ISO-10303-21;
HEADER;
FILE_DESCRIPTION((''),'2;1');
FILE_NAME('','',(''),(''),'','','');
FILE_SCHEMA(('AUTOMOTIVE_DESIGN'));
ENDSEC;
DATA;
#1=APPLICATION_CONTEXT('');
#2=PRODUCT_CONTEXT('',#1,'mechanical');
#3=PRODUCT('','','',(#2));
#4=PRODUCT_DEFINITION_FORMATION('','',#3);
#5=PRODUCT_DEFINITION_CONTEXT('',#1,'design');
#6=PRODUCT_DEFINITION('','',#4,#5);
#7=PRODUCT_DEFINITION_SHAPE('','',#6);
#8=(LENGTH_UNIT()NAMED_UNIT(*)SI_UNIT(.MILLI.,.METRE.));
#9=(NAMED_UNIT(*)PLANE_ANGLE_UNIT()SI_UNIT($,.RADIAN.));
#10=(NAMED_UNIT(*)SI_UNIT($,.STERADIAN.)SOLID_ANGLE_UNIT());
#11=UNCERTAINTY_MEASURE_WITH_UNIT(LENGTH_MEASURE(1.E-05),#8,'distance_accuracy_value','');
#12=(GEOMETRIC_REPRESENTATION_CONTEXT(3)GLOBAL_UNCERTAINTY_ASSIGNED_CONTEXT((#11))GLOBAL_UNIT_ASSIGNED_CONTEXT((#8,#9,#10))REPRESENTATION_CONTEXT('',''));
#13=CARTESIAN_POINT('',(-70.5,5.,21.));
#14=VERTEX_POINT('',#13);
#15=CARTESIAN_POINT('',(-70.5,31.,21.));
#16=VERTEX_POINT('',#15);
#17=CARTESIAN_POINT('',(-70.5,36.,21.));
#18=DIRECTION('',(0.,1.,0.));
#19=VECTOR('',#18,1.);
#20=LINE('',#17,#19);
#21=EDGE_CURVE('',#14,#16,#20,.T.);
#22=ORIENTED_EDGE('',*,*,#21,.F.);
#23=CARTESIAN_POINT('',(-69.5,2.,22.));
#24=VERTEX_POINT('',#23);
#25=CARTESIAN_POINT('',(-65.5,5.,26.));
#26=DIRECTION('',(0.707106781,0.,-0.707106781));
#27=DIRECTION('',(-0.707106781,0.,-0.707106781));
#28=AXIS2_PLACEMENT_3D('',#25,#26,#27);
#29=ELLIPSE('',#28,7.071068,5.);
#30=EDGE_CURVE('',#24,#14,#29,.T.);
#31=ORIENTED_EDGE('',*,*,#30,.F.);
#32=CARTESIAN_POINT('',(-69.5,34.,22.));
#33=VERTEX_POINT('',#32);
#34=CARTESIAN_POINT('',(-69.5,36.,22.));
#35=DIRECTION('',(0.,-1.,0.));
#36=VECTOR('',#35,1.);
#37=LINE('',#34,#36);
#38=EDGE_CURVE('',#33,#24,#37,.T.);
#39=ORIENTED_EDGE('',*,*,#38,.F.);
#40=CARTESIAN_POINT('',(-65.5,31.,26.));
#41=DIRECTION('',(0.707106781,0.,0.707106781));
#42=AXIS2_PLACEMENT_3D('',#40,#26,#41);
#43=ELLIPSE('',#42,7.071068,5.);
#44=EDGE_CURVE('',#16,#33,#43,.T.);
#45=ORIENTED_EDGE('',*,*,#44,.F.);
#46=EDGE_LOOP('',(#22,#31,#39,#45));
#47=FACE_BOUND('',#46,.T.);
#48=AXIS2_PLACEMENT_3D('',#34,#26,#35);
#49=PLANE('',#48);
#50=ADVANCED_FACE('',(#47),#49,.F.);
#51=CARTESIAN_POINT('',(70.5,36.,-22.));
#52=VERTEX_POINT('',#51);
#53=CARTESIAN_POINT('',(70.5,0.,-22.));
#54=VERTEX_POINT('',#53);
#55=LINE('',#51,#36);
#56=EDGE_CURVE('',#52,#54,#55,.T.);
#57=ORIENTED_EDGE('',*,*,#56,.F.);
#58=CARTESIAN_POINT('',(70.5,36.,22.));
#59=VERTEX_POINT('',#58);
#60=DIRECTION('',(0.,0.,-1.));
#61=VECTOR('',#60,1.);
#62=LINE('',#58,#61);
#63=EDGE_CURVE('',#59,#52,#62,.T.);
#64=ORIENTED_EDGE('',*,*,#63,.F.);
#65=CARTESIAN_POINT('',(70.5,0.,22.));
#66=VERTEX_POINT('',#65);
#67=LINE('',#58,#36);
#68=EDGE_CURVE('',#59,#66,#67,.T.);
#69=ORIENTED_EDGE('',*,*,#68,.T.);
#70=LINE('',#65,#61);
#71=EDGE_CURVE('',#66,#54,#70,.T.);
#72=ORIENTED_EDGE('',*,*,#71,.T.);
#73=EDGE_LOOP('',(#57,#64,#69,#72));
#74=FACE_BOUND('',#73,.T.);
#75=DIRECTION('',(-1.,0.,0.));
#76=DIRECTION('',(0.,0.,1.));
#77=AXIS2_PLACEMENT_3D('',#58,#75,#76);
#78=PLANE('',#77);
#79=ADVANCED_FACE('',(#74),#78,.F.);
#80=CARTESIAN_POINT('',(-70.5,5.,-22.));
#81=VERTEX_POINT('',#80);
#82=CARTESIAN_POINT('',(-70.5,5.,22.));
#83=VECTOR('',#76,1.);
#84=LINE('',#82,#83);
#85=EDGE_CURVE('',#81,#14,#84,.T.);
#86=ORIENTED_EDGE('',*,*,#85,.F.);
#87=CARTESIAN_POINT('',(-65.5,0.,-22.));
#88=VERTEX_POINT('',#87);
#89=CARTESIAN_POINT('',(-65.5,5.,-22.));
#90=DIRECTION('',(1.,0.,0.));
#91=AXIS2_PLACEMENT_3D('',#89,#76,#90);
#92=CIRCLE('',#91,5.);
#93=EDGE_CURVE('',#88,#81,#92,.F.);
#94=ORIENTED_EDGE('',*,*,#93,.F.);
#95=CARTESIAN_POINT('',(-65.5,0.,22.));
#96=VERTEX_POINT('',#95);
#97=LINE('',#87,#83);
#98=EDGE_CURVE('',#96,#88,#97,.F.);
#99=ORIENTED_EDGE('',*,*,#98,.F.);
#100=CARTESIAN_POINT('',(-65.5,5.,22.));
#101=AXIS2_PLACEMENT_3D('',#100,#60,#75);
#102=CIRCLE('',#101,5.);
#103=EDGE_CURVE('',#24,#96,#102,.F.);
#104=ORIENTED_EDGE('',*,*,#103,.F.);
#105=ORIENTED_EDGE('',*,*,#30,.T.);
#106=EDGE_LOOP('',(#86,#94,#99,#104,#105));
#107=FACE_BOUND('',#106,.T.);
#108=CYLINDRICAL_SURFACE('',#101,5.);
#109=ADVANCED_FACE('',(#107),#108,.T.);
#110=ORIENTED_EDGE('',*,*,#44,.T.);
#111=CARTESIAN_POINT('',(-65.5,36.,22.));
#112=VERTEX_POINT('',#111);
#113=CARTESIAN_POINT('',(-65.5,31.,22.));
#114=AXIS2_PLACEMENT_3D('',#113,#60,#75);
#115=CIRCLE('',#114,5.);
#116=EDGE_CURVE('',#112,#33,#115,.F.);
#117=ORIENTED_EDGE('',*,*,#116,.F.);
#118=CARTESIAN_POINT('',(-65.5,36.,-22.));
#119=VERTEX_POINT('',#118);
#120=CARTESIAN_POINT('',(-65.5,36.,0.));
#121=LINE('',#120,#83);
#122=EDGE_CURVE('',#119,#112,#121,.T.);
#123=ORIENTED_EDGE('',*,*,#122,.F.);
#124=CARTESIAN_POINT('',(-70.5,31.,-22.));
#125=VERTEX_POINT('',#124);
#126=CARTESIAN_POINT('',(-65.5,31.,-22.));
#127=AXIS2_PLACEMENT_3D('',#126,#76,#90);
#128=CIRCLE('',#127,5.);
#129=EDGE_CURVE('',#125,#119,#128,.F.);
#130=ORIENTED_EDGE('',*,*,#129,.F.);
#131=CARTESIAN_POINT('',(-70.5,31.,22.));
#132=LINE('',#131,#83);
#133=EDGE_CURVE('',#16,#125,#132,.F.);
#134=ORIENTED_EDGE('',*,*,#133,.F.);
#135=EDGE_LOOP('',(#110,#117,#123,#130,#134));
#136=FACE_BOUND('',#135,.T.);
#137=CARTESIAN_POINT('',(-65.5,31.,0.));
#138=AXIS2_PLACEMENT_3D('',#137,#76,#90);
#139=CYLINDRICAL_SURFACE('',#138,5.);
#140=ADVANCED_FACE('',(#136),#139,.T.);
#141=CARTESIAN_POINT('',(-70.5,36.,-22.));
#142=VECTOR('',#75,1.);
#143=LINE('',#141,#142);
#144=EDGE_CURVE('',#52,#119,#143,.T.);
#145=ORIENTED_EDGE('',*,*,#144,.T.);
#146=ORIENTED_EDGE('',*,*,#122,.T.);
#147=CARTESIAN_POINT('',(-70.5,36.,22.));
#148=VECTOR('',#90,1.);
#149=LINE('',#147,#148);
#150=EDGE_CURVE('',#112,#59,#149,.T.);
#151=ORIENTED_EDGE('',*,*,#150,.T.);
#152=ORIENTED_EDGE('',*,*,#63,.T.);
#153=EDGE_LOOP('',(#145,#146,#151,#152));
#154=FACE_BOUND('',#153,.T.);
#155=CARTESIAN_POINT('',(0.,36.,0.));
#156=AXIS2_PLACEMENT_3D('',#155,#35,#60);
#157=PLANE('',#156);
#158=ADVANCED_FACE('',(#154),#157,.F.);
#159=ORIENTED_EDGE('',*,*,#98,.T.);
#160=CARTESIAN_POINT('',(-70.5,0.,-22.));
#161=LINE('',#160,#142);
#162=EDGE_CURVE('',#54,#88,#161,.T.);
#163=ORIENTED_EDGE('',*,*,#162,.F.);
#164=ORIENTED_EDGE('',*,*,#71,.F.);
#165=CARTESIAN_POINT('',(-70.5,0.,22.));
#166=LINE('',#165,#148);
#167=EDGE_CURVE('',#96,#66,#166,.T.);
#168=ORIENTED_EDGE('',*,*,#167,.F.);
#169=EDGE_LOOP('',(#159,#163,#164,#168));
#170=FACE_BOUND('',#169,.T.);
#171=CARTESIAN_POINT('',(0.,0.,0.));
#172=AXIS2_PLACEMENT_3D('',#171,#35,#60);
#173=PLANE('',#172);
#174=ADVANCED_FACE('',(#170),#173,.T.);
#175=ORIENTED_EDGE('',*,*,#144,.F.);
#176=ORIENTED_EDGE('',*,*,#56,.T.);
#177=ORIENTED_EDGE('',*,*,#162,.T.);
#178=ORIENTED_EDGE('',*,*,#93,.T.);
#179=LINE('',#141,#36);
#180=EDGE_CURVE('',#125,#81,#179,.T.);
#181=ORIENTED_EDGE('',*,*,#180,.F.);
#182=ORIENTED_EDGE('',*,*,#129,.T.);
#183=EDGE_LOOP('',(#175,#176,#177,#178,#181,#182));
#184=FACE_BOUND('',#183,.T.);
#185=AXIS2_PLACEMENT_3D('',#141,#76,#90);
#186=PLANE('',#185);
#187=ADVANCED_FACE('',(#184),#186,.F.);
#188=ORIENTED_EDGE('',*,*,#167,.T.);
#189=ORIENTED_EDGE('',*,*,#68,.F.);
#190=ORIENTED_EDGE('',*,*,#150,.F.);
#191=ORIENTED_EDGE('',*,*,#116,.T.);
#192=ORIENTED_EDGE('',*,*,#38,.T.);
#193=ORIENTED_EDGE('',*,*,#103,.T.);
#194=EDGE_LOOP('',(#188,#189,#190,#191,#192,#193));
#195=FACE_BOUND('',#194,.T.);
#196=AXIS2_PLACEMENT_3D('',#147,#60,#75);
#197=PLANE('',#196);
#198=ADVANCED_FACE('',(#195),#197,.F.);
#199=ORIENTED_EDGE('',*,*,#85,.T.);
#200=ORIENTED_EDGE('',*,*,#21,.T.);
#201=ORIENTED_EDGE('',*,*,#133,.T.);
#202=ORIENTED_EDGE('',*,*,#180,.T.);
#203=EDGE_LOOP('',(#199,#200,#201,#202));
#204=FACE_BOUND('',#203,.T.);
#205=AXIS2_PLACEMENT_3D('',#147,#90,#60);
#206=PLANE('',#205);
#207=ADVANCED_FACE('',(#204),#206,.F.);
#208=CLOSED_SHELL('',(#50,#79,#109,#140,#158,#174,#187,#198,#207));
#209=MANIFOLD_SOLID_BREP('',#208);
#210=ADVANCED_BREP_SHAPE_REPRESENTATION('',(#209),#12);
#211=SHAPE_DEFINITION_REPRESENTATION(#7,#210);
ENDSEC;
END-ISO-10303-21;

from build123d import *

# Parameters (mm, degrees)
SKETCH_1_W      = 141
SKETCH_1_H      = 44
EXTRUDE_1_DEPTH = 36
FILLET_1_R      = 5


with BuildPart() as part:
    # 草图1 → 凸台-拉伸1 (new body)
    with BuildSketch(Plane(origin=(0, 0, 0), x_dir=(1, 0, 0), z_dir=(0, 1, 0))):
        Rectangle(SKETCH_1_W, SKETCH_1_H)
    extrude(amount=EXTRUDE_1_DEPTH)

    # 圆角1
    fillet_1_edges = [part.edges().sort_by_distance(p)[0] for p in [
        (-70.5, 36, 0),
        (-70.5, 0, 0),
    ]]
    fillet(fillet_1_edges, radius=FILLET_1_R)

    # 倒角1
    # the kernel refuses this chamfer: 1 mm, written as the material it takes off along each edge
    with BuildSketch(Plane(origin=(-70.5, -1.172039171, 22), x_dir=(0.9996219169112968, 0, 0.02749587661058574), z_dir=(0, 1, 0))) as chamfer_1_piece_1:
        with BuildLine():
            Line((1.028673195, 0), (-0.056547155, 1.027117794))
            Line((-0.056547155, 1.027117794), (-0.076539593, 1.026567876))
            ThreePointArc((-0.076539593, 1.026567876), (-0.034129227, 0.51339783), (-0.019992438, -0.000549918))
            Line((-0.019992438, -0.000549918), (0.000549918, -0.019992438))
            ThreePointArc((0.000549918, -0.019992438), (0.514497665, -0.00585565), (1.029223113, -0.019992438))
            Line((1.029223113, -0.019992438), (1.028673195, 0))
        make_face()
    extrude(amount=38.344078342, mode=Mode.SUBTRACT)


solid = part.part
